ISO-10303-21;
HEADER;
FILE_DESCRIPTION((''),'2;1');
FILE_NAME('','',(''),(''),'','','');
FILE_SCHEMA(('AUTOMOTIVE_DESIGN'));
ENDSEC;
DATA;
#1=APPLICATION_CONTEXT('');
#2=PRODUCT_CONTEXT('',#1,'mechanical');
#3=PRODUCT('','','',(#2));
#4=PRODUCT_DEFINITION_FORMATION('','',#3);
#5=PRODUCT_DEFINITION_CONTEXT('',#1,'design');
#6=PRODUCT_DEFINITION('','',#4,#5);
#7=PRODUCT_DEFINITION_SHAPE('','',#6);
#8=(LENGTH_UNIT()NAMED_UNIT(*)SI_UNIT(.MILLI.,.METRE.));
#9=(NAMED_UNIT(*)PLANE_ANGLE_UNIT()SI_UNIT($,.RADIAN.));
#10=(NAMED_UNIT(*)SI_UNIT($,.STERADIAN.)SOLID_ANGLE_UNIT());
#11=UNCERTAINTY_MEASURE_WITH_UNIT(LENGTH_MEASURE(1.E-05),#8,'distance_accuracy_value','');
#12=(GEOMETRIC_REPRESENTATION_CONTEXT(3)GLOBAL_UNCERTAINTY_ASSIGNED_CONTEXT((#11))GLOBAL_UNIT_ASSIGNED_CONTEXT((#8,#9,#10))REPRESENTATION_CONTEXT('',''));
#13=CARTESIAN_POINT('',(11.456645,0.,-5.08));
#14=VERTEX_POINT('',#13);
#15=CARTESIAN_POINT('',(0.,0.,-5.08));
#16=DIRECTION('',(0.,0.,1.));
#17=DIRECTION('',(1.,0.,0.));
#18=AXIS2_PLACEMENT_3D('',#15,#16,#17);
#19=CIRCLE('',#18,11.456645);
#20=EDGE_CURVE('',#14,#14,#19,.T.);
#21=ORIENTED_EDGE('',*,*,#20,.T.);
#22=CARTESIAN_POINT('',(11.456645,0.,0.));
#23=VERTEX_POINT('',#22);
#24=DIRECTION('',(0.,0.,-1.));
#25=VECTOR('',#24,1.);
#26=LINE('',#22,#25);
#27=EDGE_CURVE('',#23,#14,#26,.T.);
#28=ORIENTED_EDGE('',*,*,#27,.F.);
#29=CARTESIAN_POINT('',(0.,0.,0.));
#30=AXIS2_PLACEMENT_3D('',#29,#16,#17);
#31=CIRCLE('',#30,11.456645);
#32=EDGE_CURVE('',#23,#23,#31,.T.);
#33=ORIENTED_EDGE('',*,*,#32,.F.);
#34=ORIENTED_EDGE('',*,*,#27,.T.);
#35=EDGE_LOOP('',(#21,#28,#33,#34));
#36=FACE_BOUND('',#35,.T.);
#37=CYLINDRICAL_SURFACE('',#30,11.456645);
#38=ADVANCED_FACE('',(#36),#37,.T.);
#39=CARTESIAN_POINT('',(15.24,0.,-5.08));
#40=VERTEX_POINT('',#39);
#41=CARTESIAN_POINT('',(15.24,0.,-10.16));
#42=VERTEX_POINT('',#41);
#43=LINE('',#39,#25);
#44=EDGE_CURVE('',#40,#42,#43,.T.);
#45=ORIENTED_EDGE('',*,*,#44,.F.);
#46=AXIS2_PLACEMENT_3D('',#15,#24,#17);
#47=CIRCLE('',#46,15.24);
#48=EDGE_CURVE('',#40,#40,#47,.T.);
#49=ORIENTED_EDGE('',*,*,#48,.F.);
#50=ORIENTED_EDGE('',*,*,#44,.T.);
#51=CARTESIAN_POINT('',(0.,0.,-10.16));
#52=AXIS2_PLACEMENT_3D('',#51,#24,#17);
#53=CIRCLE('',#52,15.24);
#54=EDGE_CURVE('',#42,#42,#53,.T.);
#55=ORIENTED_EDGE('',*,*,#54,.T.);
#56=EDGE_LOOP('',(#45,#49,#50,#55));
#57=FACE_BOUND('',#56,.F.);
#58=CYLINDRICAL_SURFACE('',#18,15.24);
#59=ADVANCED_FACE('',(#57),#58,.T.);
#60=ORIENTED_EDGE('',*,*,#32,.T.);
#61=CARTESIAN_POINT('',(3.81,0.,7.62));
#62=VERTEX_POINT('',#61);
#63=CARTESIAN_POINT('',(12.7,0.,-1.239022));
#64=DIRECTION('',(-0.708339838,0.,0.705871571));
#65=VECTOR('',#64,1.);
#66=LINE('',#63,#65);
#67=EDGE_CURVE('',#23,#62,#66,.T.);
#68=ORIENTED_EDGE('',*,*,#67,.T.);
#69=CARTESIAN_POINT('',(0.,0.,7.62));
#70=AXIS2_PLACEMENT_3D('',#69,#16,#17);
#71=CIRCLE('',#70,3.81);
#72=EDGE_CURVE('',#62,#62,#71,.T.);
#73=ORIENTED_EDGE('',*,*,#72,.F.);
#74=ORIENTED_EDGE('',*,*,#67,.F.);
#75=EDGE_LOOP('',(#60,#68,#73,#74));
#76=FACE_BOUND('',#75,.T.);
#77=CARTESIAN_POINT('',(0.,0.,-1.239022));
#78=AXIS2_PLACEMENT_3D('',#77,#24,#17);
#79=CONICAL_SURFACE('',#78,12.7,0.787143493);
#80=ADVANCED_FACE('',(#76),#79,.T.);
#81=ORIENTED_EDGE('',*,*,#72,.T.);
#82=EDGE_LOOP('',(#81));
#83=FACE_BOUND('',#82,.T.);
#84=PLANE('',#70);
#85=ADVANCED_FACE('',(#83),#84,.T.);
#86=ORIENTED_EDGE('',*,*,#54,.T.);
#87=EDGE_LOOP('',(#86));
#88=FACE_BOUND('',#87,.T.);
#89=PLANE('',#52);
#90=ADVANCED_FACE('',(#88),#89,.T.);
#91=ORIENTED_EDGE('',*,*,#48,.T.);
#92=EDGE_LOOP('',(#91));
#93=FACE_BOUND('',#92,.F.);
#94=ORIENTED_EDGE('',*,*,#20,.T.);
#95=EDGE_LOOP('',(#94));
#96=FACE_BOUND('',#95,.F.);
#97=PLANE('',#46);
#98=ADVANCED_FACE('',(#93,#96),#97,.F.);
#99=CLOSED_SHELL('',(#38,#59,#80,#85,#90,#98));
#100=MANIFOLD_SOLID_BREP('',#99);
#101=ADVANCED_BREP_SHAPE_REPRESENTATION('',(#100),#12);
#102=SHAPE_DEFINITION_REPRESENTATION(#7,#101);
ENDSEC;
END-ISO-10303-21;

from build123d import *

# Parameters (mm, degrees)
F0_R     = 12.7
F1_DEPTH = 7.62
F3_DEPTH = 5.08
F7_R     = 15.24
F8_DEPTH = 5.08


# Not quite as in the source:
# - a fillet or chamfer that OpenCascade refuses, or shapes differently, is made with other operations: its cross-section is extruded or revolved along the edge and cut away or added
# - the program builds the solid bodies; features that only make, move or delete a surface that nothing else refers to are left out


with BuildPart() as f1:
    # F0 (on Top) → F1 (new body)
    with BuildSketch(Plane.XY):
        Circle(F0_R)
    extrude(amount=F1_DEPTH)

    # F2: chamfer of 8.89 x 8.8590220811 on 1 edges, made by hand

    # F2_s1 → F2_t2 (revolve, cut)
    with BuildSketch(Plane.XZ):
        Polygon((12.7, -1.2390220811), (3.81, 7.62), (12.7, 7.62), align=None)
    revolve(axis=Axis((0, 0, 7.62), (0, 0, 1)), mode=Mode.SUBTRACT)

    # F3 (add): a face of the model
    f3_faces = [f1.faces().sort_by_distance(p)[0] for p in [
        (0, 0, 0),
    ]]
    extrude(f3_faces, amount=F3_DEPTH)

    # F7 (on face) → F8 (join)
    with BuildSketch(Plane(origin=(0, 0, -5.08), x_dir=(1, 0, 0), z_dir=(0, 0, -1))):
        Circle(F7_R)
    extrude(amount=F8_DEPTH)


solid = f1.part
